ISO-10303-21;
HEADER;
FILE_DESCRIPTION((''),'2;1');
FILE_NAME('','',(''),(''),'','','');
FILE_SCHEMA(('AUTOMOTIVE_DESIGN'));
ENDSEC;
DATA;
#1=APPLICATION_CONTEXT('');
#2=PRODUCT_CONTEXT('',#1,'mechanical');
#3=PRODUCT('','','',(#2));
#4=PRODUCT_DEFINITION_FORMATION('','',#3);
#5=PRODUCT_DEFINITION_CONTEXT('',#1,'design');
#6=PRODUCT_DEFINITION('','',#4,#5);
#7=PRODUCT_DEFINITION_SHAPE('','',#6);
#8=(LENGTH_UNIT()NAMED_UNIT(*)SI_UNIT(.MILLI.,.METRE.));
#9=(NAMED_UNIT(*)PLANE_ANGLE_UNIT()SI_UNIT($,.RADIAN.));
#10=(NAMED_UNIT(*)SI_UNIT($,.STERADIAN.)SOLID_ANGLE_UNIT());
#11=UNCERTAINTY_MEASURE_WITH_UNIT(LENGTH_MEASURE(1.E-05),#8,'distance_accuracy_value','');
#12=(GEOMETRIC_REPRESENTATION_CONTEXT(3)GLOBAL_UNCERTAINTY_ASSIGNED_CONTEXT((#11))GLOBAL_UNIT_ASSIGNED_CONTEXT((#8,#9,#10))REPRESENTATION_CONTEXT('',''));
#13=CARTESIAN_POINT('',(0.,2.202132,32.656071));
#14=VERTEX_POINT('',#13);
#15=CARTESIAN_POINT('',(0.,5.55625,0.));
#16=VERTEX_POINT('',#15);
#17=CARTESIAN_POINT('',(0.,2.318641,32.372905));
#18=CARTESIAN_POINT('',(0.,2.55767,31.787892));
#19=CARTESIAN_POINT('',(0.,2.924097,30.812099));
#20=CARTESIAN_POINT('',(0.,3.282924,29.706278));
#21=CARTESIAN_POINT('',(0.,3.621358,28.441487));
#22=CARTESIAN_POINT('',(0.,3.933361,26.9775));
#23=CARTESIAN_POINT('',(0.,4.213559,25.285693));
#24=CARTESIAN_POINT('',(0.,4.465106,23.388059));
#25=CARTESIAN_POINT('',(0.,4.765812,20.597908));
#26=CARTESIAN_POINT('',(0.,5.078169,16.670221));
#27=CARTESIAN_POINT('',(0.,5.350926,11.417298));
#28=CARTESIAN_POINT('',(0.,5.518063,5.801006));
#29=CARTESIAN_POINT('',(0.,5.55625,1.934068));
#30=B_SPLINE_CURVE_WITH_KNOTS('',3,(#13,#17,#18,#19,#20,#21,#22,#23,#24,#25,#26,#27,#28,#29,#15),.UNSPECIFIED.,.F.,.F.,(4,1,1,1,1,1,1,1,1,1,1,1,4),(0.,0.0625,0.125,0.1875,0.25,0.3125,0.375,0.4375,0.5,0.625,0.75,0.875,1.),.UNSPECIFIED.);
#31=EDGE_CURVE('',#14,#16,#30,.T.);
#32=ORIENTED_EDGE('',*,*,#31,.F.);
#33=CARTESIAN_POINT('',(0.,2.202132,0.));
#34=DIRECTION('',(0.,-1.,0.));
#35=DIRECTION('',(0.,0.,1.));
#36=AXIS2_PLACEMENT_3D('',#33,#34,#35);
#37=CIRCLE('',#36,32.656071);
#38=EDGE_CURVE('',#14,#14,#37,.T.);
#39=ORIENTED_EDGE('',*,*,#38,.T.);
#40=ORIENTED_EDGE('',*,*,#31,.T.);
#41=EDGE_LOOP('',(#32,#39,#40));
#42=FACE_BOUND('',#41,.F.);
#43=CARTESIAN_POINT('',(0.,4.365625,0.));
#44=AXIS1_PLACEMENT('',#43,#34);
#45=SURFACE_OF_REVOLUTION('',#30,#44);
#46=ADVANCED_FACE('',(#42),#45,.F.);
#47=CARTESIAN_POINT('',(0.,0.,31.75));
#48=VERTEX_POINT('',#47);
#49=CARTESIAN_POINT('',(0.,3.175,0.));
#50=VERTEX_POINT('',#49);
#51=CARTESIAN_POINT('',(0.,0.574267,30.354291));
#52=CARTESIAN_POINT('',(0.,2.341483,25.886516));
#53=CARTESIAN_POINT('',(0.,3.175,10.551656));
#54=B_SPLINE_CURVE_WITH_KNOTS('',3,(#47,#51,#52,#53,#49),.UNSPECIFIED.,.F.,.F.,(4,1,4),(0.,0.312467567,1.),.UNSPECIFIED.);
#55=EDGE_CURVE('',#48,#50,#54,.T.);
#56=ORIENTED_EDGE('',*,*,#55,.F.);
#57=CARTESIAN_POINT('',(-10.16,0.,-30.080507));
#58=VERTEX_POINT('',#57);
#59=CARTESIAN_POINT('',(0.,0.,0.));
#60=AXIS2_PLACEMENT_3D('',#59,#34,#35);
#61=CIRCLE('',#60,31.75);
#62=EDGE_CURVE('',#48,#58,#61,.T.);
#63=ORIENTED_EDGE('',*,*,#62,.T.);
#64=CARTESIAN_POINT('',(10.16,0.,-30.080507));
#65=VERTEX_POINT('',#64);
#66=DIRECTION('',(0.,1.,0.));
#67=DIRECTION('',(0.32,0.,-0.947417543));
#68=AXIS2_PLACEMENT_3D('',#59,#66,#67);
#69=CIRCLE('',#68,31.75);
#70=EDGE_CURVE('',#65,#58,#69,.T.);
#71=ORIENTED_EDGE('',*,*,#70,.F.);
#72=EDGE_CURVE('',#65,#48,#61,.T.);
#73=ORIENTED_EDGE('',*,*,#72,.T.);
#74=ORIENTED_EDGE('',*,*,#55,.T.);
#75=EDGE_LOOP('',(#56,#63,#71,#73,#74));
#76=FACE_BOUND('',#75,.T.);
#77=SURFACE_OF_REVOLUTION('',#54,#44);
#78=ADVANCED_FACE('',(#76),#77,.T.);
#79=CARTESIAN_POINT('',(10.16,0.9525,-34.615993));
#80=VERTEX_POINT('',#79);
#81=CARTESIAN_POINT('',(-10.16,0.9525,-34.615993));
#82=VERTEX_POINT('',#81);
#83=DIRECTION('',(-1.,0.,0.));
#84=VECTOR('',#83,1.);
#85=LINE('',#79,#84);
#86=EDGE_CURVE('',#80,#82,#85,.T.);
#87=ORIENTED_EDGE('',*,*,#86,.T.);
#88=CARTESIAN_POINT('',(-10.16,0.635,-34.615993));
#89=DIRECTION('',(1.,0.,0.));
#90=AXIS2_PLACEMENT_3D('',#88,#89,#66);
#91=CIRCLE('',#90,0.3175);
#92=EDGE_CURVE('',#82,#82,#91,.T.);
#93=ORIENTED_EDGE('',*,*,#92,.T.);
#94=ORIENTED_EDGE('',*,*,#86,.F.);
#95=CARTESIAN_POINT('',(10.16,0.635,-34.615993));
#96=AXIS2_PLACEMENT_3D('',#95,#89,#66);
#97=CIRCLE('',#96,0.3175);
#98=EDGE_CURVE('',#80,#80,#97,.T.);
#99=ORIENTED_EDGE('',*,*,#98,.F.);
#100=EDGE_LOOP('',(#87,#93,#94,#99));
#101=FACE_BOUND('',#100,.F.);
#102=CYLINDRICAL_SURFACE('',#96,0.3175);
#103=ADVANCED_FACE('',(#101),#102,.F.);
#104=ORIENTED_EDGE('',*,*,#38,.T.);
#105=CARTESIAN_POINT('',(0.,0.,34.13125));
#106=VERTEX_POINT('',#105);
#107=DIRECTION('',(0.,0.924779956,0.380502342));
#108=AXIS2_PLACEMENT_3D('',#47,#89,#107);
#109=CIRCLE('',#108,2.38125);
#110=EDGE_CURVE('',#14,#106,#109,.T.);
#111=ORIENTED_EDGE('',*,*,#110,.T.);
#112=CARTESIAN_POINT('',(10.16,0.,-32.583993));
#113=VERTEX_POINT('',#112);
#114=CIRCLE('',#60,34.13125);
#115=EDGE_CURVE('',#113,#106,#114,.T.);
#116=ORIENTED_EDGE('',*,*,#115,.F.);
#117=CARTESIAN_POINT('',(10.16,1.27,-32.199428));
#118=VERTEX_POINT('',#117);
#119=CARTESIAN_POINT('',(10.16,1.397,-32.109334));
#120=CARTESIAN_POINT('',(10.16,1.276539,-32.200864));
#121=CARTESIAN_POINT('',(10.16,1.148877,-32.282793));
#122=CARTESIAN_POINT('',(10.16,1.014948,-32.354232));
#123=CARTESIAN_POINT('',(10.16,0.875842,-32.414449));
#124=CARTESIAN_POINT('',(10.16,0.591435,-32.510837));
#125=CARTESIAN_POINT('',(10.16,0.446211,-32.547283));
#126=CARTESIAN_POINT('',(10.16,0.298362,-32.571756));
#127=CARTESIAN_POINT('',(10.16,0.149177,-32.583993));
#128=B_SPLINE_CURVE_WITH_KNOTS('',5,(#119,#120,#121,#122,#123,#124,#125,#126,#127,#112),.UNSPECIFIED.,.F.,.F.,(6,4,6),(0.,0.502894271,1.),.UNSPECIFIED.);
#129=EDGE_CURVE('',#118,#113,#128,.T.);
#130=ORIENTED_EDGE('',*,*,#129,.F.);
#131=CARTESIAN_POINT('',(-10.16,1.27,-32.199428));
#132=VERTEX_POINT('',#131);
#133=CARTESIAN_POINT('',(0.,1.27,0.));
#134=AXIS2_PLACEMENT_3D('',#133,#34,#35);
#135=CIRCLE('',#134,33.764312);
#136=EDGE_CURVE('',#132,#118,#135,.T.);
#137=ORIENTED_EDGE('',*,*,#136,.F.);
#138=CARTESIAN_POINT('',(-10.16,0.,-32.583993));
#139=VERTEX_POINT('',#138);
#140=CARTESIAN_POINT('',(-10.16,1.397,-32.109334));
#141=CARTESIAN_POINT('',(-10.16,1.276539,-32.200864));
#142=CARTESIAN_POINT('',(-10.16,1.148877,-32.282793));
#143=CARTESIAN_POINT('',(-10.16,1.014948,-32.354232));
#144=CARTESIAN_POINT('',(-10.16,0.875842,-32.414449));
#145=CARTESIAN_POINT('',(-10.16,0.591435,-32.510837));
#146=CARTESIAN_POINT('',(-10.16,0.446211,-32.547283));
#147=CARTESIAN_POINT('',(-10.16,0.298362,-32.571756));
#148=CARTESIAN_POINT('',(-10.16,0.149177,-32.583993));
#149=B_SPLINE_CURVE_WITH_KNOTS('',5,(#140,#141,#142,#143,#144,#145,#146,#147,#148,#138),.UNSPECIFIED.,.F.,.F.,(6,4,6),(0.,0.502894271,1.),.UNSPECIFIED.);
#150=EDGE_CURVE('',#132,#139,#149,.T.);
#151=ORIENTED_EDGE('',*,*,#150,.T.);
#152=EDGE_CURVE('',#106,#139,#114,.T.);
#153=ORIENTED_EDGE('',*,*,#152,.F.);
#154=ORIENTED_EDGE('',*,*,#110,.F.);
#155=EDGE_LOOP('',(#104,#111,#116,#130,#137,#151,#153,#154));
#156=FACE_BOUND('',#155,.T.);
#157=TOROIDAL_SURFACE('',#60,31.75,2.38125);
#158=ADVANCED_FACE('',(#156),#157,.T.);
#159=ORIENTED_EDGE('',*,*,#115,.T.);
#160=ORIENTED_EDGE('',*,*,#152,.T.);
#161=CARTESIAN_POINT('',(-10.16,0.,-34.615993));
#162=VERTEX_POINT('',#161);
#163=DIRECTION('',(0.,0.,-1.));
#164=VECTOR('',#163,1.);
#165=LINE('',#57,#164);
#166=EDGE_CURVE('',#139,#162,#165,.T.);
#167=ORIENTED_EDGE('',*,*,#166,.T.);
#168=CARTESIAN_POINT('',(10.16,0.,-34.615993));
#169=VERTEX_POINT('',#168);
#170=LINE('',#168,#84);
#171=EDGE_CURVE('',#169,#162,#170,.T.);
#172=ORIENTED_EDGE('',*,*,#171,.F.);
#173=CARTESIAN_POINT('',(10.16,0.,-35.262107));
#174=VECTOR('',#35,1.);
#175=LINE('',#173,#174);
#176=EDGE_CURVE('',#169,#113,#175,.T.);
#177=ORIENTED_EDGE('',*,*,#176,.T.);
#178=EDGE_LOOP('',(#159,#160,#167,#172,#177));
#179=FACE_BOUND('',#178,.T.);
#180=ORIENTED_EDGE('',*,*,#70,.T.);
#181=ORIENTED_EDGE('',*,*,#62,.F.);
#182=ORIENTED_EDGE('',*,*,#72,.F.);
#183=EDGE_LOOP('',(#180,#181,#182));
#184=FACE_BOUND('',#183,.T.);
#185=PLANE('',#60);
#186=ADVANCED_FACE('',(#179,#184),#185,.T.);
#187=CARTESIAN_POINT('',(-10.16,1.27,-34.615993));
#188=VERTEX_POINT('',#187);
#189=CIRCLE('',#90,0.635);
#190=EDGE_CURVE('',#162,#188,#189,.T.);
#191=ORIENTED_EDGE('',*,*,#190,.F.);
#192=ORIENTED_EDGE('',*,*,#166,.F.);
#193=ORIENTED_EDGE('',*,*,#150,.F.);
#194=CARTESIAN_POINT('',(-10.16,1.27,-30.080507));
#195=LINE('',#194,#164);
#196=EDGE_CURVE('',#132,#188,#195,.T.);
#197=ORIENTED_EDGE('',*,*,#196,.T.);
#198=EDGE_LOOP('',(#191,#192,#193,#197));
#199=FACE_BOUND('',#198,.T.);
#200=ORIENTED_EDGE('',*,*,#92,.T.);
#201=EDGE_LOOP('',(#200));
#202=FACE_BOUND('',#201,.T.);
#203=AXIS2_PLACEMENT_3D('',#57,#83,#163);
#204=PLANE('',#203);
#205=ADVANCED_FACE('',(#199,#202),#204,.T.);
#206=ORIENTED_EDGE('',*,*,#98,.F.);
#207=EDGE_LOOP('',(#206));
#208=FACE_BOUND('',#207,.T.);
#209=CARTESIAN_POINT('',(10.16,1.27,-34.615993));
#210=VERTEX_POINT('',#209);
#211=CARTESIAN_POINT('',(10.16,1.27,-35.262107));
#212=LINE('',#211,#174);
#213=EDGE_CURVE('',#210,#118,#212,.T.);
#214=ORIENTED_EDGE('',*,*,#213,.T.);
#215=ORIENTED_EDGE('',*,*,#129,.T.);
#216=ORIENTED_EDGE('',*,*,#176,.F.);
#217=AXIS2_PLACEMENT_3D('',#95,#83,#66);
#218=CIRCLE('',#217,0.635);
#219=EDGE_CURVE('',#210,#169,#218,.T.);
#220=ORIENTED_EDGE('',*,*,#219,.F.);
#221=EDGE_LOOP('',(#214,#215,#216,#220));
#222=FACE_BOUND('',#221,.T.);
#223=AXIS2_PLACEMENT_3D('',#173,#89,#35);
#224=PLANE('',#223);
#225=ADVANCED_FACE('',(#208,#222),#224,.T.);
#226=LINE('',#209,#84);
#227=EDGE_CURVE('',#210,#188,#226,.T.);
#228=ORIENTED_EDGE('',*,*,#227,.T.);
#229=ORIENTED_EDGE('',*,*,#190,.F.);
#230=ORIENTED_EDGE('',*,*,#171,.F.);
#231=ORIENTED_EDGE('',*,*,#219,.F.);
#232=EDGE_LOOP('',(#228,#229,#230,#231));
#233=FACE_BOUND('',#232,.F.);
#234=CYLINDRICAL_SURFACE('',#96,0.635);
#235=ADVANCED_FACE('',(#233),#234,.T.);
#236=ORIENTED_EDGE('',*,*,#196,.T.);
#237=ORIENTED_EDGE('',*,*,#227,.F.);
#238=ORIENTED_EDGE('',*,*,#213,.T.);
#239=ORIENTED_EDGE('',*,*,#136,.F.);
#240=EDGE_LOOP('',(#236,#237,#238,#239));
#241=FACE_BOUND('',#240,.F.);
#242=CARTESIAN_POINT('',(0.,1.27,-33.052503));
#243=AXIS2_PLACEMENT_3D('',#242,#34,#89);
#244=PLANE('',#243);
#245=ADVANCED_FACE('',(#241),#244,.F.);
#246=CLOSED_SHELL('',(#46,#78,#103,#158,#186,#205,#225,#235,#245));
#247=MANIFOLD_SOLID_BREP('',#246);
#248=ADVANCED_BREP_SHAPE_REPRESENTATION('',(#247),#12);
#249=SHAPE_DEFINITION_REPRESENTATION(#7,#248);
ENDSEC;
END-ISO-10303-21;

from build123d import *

# Parameters (mm, degrees)
F3_DEPTH = 1.27
F4_R     = 0.3175
F5_DEPTH = 44.2922501


# Not quite as in the source:
# - the dataset's text gives a spline's control points without its knots; the knots are read off the source's solid


with BuildPart() as f1:
    # F0 (on Right) → F1 (revolve)
    with BuildSketch(Plane.YZ):
        with BuildLine():
            Line((0, 34.13125), (0, 31.75))
            add(Edge.make_bspline(
                [(0, 31.75), (0.5742670905, 30.3542906008), (2.3414834837, 25.8865164681), (3.175, 10.5516560434), (3.175, 0)],
                knots=[0, 0, 0, 0, 0.3124675666, 1, 1, 1, 1], degree=3))
            Line((3.175, 0), (5.55625, 0))
            add(Edge.make_bspline(
                [(2.2021322713, 32.6560712016), (2.3186413793, 32.3729053021), (2.5576698716, 31.7878917938), (2.9240965193, 30.812098832), (3.2829237449, 29.7062776723), (3.6213582396, 28.4414870624), (3.9333609229, 26.9775001767), (4.2135585587, 25.2856930459), (4.4651056247, 23.3880591837), (4.7658122637, 20.5979082433), (5.0781689931, 16.6702210435), (5.3509257758, 11.4172981506), (5.5180630854, 5.8010058197), (5.55625, 1.9340677683), (5.55625, 0)],
                knots=[1e-10, 1e-10, 1e-10, 1e-10, 0.0625000001, 0.1250000001, 0.1875000001, 0.2500000001, 0.3125000001, 0.3750000001, 0.4375000001, 0.5, 0.625, 0.75, 0.875, 1, 1, 1, 1], degree=3))
            ThreePointArc((2.2021322713, 32.6560712016), (1.3252866697, 33.728374789), (0, 34.13125))
        make_face()
    revolve(axis=Axis((0, 4.365625, 0), (0, -1, 0)))

    # F2 (on face) → F3 (join)
    with BuildSketch(Plane.XZ):
        with BuildLine():
            Line((-10.16, -30.0805069771), (-10.16, -35.2621069771))
            Line((-10.16, -35.2621069771), (10.16, -35.2621069771))
            Line((10.16, -35.2621069771), (10.16, -30.0805069771))
            ThreePointArc((10.16, -30.0805069771), (0, -31.75), (-10.16, -30.0805069771))
        make_face()
    extrude(amount=-F3_DEPTH)

    # F4 (on face) → F5 (cut, through all)
    with BuildSketch(Plane.YZ.offset(10.16)):
        with Locations((0.635, -34.6159934103)):
            Circle(F4_R)
        with BuildLine():
            Line((1.27, -35.2621069771), (1.27, -34.6159934103))
            ThreePointArc((1.27, -34.6159934103), (0.635, -35.2509934103), (0, -34.6159934103))
            Line((0, -34.6159934103), (0, -35.2621069771))
            Line((0, -35.2621069771), (1.27, -35.2621069771))
        make_face()
    extrude(amount=-F5_DEPTH, mode=Mode.SUBTRACT)


solid = f1.part
